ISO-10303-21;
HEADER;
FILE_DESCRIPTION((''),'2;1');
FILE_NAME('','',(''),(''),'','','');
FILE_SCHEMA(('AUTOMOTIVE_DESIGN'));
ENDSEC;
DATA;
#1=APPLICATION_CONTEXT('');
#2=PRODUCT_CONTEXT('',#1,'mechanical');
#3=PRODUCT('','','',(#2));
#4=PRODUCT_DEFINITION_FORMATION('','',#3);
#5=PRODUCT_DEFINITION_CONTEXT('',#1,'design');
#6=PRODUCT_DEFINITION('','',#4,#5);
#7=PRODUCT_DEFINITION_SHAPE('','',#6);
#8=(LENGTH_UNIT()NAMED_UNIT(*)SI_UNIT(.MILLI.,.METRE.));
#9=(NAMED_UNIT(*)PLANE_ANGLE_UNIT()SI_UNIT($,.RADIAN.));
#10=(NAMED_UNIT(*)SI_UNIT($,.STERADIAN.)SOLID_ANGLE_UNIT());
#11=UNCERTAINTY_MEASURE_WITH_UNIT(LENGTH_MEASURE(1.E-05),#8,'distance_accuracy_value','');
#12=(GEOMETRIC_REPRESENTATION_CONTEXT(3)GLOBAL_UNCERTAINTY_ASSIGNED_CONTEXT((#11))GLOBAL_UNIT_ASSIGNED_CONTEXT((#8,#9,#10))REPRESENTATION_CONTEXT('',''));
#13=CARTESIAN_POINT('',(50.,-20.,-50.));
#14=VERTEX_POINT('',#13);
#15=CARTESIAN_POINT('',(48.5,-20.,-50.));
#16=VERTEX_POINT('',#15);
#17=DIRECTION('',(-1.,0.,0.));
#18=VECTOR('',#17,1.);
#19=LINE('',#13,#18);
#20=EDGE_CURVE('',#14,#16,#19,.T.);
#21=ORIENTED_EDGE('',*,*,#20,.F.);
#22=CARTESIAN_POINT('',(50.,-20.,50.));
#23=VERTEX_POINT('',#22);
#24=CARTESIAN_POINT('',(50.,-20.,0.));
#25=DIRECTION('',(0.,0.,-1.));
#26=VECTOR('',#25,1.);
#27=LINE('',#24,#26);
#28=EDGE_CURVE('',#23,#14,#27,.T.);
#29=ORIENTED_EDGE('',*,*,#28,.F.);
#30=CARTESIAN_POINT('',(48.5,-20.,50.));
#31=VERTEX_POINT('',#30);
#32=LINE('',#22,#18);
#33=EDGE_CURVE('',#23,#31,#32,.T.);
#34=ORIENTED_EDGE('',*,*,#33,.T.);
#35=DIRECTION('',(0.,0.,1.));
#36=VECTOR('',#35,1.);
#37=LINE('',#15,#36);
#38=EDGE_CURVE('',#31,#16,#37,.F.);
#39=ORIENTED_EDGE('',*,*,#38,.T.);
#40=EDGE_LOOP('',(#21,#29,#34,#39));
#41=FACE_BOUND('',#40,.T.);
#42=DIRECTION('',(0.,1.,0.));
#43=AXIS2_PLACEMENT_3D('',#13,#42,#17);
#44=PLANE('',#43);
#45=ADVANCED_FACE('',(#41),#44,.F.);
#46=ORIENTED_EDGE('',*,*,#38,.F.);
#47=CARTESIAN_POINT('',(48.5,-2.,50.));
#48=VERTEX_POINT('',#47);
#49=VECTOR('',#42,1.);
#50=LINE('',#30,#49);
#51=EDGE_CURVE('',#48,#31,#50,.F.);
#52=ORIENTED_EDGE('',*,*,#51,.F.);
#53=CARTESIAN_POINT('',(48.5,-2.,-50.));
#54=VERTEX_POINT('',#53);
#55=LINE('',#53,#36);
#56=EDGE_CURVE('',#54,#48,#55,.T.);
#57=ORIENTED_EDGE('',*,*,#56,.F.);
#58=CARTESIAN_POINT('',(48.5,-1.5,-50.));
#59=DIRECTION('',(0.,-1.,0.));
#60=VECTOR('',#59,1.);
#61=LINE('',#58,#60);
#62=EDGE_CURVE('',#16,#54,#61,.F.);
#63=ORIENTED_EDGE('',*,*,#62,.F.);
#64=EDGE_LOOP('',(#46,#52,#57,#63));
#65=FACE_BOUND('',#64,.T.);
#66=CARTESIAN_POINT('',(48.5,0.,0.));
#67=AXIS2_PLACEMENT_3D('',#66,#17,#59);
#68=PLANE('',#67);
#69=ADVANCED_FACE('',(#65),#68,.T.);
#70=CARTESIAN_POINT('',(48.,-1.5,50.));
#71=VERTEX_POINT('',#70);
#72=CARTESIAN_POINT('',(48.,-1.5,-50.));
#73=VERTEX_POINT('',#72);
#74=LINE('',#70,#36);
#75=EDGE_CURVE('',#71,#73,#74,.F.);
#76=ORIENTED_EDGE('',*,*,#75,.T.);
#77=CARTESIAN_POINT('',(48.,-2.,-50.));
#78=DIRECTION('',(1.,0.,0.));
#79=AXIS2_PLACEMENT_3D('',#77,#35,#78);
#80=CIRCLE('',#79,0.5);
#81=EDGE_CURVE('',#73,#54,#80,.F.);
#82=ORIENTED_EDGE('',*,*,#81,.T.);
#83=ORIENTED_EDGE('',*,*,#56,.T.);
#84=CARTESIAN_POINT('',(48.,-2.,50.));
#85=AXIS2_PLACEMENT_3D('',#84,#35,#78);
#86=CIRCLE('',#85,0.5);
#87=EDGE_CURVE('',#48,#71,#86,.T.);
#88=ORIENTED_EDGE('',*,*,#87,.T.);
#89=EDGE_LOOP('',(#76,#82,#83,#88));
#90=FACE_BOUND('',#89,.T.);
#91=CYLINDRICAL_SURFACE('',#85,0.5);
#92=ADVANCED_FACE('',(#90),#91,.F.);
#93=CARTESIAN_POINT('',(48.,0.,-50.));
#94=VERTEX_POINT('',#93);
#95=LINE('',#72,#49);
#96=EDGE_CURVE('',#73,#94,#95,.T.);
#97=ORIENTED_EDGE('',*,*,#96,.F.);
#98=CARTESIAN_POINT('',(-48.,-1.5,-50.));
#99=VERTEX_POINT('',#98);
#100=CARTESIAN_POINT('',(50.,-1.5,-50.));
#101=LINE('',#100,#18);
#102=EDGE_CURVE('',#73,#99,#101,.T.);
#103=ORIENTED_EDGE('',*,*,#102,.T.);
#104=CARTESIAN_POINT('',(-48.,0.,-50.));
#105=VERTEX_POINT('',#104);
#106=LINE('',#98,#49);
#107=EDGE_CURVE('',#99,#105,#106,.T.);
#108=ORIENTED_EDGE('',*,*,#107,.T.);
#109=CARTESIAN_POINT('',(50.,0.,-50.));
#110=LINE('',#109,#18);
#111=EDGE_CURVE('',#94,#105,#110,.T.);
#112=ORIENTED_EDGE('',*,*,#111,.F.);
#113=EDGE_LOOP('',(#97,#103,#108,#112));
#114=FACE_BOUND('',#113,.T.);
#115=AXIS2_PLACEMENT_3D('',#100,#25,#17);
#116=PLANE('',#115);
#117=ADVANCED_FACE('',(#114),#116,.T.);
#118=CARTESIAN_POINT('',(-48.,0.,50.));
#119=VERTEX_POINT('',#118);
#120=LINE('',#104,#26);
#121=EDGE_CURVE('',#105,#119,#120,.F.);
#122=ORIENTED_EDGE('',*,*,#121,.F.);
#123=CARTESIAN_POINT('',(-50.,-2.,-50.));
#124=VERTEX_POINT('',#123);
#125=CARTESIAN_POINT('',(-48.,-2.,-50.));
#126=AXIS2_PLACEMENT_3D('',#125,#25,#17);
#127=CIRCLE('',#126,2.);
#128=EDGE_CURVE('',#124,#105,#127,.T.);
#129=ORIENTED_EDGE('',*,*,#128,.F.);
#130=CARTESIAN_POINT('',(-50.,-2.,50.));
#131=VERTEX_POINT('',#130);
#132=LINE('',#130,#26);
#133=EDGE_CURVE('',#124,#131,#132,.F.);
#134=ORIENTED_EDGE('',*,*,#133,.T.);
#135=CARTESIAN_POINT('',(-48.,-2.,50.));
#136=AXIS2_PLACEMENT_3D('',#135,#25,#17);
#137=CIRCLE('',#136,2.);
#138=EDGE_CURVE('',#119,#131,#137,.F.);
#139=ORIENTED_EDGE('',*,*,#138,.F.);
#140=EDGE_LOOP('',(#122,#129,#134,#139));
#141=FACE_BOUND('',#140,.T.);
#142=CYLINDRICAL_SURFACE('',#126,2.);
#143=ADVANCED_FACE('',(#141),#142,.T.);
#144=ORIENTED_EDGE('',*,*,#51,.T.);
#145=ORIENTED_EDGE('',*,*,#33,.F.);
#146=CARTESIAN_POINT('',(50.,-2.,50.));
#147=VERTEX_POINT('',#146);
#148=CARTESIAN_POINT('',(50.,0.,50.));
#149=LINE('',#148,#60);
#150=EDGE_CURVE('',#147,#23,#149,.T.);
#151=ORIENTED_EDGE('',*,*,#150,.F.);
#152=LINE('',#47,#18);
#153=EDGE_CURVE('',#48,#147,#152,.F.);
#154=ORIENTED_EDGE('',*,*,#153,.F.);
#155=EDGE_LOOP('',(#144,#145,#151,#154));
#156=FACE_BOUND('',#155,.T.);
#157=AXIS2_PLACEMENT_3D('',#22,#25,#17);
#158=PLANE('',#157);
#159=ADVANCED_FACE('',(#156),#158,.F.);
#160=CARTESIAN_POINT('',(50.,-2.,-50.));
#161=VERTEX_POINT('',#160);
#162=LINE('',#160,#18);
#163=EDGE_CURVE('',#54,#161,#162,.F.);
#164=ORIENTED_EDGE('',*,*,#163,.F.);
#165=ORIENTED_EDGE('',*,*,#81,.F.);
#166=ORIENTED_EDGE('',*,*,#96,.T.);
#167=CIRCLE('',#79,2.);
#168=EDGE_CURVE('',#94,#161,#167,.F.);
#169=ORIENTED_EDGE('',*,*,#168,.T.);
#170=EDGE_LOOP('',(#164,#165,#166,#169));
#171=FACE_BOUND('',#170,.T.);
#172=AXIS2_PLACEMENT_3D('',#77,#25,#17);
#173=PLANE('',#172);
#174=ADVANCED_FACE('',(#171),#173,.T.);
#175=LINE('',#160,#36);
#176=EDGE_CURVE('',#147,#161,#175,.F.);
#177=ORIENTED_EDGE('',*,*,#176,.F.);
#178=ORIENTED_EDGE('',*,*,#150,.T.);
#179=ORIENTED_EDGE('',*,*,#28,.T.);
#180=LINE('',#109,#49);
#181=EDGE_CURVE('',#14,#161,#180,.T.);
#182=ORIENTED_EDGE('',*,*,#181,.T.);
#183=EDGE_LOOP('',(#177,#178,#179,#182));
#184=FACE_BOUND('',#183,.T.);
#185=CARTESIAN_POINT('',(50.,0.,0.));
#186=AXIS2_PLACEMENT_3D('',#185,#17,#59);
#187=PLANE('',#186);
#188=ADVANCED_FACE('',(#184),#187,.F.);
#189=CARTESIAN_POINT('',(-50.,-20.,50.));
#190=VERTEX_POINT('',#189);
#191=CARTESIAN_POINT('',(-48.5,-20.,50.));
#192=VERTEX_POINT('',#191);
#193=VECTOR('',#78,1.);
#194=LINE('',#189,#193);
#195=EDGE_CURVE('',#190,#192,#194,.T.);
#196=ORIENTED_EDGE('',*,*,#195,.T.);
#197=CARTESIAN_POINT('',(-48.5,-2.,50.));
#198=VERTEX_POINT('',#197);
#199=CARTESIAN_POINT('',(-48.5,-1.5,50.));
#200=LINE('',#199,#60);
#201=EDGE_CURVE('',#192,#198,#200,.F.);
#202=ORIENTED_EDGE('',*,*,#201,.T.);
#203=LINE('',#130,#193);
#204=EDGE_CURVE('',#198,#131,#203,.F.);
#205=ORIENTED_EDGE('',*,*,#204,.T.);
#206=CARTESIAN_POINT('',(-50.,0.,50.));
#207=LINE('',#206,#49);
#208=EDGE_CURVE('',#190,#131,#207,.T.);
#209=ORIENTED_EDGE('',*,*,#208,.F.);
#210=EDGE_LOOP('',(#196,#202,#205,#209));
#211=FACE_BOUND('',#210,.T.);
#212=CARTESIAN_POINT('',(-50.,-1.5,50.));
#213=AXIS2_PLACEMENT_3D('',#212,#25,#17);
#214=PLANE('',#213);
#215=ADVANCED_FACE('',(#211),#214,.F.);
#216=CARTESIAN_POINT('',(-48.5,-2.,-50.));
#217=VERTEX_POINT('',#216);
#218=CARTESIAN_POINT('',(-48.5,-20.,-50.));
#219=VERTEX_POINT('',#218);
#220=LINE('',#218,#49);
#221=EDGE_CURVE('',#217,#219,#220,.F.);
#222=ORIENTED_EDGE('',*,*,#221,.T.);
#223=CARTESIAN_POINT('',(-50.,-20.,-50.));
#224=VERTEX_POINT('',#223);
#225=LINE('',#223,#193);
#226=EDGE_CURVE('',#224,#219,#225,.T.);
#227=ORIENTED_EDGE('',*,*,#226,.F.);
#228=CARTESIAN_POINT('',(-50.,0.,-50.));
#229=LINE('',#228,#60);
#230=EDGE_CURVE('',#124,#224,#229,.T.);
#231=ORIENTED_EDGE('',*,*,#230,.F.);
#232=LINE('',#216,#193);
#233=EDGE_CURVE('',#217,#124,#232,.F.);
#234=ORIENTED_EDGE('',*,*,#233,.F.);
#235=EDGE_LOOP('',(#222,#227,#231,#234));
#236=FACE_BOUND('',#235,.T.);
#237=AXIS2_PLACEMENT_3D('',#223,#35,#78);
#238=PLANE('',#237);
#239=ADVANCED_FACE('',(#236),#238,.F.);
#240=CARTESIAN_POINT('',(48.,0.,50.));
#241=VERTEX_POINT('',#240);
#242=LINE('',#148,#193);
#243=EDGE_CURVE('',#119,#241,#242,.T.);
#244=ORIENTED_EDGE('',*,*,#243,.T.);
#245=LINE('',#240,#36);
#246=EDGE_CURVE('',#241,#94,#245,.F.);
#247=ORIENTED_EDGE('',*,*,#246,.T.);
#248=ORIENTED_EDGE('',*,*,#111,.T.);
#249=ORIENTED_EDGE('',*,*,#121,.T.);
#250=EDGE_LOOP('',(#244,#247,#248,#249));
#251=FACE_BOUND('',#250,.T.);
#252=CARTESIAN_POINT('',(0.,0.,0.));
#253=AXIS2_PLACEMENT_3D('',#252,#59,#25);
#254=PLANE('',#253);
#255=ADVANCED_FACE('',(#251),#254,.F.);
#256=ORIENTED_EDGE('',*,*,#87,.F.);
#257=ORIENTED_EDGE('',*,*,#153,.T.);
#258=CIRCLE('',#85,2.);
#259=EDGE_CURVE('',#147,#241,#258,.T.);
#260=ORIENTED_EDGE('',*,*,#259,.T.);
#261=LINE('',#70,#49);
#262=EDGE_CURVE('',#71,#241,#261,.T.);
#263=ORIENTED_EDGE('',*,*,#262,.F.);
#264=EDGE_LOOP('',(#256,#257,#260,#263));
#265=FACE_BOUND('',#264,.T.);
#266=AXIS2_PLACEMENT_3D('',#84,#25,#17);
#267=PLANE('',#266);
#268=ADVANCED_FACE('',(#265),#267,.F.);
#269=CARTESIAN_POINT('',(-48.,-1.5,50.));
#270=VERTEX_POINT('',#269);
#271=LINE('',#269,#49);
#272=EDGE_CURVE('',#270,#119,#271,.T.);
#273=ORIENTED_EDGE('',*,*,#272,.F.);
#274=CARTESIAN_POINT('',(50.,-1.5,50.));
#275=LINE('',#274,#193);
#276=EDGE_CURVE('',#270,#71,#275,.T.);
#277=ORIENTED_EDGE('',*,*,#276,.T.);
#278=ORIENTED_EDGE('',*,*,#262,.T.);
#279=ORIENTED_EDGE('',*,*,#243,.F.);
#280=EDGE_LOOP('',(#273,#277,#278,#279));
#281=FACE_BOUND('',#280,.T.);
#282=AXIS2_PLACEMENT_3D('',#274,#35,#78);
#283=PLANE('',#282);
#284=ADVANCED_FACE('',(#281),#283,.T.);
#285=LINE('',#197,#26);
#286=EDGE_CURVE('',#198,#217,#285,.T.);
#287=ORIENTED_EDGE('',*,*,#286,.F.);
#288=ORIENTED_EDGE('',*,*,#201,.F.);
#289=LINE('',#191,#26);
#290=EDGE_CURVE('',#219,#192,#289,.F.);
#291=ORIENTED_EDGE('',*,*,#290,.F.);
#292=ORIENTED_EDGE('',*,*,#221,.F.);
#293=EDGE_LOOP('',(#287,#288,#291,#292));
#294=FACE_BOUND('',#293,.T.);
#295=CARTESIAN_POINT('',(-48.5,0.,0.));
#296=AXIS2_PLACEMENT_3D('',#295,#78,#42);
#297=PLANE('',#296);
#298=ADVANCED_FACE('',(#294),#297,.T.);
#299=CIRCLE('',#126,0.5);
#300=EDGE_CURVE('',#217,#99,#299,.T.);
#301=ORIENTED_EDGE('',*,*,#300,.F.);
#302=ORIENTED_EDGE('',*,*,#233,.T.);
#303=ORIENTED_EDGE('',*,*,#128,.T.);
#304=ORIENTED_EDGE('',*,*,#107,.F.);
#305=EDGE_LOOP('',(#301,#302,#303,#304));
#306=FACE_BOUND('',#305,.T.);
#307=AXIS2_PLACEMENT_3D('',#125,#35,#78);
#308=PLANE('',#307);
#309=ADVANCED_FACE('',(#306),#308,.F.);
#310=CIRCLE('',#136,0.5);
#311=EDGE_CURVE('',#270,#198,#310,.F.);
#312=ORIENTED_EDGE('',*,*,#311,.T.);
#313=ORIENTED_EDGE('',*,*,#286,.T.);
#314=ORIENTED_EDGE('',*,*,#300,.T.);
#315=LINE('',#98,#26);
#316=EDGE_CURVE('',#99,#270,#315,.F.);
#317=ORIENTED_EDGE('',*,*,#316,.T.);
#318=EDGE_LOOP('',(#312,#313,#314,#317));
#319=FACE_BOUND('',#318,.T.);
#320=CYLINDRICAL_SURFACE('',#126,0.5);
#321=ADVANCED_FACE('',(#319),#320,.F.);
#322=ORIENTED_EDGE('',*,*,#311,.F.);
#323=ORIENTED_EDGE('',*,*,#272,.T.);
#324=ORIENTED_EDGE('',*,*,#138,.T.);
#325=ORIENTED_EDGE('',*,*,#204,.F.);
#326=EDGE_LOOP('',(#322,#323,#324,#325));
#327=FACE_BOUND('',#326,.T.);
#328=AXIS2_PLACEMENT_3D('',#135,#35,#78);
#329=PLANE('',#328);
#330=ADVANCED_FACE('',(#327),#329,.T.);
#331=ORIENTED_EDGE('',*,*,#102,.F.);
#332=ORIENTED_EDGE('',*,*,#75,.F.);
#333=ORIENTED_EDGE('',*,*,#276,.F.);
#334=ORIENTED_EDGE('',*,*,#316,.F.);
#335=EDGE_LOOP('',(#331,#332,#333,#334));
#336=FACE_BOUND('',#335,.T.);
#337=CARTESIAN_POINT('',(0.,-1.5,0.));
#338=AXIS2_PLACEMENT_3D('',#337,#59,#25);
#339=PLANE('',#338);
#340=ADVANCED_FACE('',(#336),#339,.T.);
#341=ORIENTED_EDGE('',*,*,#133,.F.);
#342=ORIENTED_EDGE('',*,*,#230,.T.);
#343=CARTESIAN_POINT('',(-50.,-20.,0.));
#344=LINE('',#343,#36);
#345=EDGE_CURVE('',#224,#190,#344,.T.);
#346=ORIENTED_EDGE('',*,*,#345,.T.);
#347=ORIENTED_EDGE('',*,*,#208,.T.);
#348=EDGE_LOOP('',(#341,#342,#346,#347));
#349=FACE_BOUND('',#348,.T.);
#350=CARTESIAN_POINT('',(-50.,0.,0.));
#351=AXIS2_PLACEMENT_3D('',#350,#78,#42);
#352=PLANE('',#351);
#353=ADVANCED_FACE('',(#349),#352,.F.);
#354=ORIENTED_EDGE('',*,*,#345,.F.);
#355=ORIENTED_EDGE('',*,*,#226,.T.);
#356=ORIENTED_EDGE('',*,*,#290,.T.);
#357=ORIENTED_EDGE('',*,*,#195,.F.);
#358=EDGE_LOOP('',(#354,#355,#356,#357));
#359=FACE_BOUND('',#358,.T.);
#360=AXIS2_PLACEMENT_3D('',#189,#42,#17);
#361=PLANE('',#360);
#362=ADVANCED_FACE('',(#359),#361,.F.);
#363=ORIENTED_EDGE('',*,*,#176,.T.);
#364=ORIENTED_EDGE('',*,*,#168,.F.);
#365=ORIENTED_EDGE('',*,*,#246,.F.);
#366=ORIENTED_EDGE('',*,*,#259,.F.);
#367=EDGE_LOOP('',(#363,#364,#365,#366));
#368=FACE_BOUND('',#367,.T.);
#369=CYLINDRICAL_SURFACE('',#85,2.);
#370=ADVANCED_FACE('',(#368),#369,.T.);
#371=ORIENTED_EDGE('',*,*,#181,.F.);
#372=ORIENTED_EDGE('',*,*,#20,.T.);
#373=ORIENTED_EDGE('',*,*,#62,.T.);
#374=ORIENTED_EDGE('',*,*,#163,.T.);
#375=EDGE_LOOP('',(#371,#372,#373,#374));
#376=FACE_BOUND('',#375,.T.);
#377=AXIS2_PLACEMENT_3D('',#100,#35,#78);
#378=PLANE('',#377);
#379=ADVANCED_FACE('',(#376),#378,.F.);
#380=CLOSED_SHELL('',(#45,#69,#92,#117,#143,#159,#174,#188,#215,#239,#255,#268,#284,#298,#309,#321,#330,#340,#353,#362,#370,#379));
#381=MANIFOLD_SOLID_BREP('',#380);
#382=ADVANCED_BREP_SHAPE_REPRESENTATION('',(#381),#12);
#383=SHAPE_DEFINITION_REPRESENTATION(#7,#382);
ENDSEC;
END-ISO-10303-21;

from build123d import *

# Parameters (mm, degrees)
SKETCH1_W                      = 100
SKETCH1_H                      = 100
BASE_FLANGE1_DEPTH             = 1.5
EDGE_FLANGE1_STRIP_W           = 7
EDGE_FLANGE1_STRIP_H           = 1.5
EDGE_FLANGE1_STRIP_CUT_DEPTH   = 100
EDGE_FLANGE1_STRIP_2_W         = 7
EDGE_FLANGE1_STRIP_2_H         = 1.5
EDGE_FLANGE1_STRIP_CUT_2_DEPTH = 100
EDGE_FLANGE1_DEPTH             = 100
EDGE_FLANGE1_BEND_DEPTH        = 100


# Sheet-metal steps are written as plain solids
with BuildPart() as part:
    # Sketch1 → Base-Flange1 (new body)
    with BuildSketch(Plane(origin=(0, 0, 0), x_dir=(1, 0, 0), z_dir=(0, 1, 0))):
        Rectangle(SKETCH1_W, SKETCH1_H)
    extrude(amount=-BASE_FLANGE1_DEPTH)

    # Edge-Flange1 strip (across the edge) → Edge-Flange1 strip cut (cut)
    with BuildSketch(Plane(origin=(50, -1.5, -50), x_dir=(-1, 0, 0), z_dir=(0, 0, 1))):
        with Locations((-1.5, -0.75)):
            Rectangle(EDGE_FLANGE1_STRIP_W, EDGE_FLANGE1_STRIP_H)
    extrude(amount=EDGE_FLANGE1_STRIP_CUT_DEPTH, mode=Mode.SUBTRACT)

    # Edge-Flange1 strip 2 (across the edge) → Edge-Flange1 strip cut 2 (cut)
    with BuildSketch(Plane(origin=(-50, -1.5, 50), x_dir=(1, 0, 0), z_dir=(0, 0, -1))):
        with Locations((-1.5, -0.75)):
            Rectangle(EDGE_FLANGE1_STRIP_2_W, EDGE_FLANGE1_STRIP_2_H)
    extrude(amount=EDGE_FLANGE1_STRIP_CUT_2_DEPTH, mode=Mode.SUBTRACT)

    # Edge-Flange1 section (across the edge) → Edge-Flange1 (add)
    with BuildSketch(Plane(origin=(50, -1.5, -50), x_dir=(-1, 0, 0), z_dir=(0, 0, 1))):
        with BuildLine():
            Line((0, 0.5), (0, 18.5))
            Line((0, 18.5), (1.5, 18.5))
            Line((1.5, 18.5), (1.5, 0.5))
            ThreePointArc((1.5, 0.5), (1.646446609, 0.146446609), (2, 0))
            Line((2, 0), (2, -1.5))
            ThreePointArc((2, -1.5), (0.585786438, -0.914213562), (0, 0.5))
        make_face()
    extrude(amount=EDGE_FLANGE1_DEPTH)

    # Edge-Flange1 section 2 (across the edge) → Edge-Flange1 bend (add)
    with BuildSketch(Plane(origin=(-50, -1.5, 50), x_dir=(1, 0, 0), z_dir=(0, 0, -1))):
        with BuildLine():
            Line((0, 0.5), (0, 18.5))
            Line((0, 18.5), (1.5, 18.5))
            Line((1.5, 18.5), (1.5, 0.5))
            ThreePointArc((1.5, 0.5), (1.646446609, 0.146446609), (2, 0))
            Line((2, 0), (2, -1.5))
            ThreePointArc((2, -1.5), (0.585786438, -0.914213562), (0, 0.5))
        make_face()
    extrude(amount=EDGE_FLANGE1_BEND_DEPTH)


solid = part.part
